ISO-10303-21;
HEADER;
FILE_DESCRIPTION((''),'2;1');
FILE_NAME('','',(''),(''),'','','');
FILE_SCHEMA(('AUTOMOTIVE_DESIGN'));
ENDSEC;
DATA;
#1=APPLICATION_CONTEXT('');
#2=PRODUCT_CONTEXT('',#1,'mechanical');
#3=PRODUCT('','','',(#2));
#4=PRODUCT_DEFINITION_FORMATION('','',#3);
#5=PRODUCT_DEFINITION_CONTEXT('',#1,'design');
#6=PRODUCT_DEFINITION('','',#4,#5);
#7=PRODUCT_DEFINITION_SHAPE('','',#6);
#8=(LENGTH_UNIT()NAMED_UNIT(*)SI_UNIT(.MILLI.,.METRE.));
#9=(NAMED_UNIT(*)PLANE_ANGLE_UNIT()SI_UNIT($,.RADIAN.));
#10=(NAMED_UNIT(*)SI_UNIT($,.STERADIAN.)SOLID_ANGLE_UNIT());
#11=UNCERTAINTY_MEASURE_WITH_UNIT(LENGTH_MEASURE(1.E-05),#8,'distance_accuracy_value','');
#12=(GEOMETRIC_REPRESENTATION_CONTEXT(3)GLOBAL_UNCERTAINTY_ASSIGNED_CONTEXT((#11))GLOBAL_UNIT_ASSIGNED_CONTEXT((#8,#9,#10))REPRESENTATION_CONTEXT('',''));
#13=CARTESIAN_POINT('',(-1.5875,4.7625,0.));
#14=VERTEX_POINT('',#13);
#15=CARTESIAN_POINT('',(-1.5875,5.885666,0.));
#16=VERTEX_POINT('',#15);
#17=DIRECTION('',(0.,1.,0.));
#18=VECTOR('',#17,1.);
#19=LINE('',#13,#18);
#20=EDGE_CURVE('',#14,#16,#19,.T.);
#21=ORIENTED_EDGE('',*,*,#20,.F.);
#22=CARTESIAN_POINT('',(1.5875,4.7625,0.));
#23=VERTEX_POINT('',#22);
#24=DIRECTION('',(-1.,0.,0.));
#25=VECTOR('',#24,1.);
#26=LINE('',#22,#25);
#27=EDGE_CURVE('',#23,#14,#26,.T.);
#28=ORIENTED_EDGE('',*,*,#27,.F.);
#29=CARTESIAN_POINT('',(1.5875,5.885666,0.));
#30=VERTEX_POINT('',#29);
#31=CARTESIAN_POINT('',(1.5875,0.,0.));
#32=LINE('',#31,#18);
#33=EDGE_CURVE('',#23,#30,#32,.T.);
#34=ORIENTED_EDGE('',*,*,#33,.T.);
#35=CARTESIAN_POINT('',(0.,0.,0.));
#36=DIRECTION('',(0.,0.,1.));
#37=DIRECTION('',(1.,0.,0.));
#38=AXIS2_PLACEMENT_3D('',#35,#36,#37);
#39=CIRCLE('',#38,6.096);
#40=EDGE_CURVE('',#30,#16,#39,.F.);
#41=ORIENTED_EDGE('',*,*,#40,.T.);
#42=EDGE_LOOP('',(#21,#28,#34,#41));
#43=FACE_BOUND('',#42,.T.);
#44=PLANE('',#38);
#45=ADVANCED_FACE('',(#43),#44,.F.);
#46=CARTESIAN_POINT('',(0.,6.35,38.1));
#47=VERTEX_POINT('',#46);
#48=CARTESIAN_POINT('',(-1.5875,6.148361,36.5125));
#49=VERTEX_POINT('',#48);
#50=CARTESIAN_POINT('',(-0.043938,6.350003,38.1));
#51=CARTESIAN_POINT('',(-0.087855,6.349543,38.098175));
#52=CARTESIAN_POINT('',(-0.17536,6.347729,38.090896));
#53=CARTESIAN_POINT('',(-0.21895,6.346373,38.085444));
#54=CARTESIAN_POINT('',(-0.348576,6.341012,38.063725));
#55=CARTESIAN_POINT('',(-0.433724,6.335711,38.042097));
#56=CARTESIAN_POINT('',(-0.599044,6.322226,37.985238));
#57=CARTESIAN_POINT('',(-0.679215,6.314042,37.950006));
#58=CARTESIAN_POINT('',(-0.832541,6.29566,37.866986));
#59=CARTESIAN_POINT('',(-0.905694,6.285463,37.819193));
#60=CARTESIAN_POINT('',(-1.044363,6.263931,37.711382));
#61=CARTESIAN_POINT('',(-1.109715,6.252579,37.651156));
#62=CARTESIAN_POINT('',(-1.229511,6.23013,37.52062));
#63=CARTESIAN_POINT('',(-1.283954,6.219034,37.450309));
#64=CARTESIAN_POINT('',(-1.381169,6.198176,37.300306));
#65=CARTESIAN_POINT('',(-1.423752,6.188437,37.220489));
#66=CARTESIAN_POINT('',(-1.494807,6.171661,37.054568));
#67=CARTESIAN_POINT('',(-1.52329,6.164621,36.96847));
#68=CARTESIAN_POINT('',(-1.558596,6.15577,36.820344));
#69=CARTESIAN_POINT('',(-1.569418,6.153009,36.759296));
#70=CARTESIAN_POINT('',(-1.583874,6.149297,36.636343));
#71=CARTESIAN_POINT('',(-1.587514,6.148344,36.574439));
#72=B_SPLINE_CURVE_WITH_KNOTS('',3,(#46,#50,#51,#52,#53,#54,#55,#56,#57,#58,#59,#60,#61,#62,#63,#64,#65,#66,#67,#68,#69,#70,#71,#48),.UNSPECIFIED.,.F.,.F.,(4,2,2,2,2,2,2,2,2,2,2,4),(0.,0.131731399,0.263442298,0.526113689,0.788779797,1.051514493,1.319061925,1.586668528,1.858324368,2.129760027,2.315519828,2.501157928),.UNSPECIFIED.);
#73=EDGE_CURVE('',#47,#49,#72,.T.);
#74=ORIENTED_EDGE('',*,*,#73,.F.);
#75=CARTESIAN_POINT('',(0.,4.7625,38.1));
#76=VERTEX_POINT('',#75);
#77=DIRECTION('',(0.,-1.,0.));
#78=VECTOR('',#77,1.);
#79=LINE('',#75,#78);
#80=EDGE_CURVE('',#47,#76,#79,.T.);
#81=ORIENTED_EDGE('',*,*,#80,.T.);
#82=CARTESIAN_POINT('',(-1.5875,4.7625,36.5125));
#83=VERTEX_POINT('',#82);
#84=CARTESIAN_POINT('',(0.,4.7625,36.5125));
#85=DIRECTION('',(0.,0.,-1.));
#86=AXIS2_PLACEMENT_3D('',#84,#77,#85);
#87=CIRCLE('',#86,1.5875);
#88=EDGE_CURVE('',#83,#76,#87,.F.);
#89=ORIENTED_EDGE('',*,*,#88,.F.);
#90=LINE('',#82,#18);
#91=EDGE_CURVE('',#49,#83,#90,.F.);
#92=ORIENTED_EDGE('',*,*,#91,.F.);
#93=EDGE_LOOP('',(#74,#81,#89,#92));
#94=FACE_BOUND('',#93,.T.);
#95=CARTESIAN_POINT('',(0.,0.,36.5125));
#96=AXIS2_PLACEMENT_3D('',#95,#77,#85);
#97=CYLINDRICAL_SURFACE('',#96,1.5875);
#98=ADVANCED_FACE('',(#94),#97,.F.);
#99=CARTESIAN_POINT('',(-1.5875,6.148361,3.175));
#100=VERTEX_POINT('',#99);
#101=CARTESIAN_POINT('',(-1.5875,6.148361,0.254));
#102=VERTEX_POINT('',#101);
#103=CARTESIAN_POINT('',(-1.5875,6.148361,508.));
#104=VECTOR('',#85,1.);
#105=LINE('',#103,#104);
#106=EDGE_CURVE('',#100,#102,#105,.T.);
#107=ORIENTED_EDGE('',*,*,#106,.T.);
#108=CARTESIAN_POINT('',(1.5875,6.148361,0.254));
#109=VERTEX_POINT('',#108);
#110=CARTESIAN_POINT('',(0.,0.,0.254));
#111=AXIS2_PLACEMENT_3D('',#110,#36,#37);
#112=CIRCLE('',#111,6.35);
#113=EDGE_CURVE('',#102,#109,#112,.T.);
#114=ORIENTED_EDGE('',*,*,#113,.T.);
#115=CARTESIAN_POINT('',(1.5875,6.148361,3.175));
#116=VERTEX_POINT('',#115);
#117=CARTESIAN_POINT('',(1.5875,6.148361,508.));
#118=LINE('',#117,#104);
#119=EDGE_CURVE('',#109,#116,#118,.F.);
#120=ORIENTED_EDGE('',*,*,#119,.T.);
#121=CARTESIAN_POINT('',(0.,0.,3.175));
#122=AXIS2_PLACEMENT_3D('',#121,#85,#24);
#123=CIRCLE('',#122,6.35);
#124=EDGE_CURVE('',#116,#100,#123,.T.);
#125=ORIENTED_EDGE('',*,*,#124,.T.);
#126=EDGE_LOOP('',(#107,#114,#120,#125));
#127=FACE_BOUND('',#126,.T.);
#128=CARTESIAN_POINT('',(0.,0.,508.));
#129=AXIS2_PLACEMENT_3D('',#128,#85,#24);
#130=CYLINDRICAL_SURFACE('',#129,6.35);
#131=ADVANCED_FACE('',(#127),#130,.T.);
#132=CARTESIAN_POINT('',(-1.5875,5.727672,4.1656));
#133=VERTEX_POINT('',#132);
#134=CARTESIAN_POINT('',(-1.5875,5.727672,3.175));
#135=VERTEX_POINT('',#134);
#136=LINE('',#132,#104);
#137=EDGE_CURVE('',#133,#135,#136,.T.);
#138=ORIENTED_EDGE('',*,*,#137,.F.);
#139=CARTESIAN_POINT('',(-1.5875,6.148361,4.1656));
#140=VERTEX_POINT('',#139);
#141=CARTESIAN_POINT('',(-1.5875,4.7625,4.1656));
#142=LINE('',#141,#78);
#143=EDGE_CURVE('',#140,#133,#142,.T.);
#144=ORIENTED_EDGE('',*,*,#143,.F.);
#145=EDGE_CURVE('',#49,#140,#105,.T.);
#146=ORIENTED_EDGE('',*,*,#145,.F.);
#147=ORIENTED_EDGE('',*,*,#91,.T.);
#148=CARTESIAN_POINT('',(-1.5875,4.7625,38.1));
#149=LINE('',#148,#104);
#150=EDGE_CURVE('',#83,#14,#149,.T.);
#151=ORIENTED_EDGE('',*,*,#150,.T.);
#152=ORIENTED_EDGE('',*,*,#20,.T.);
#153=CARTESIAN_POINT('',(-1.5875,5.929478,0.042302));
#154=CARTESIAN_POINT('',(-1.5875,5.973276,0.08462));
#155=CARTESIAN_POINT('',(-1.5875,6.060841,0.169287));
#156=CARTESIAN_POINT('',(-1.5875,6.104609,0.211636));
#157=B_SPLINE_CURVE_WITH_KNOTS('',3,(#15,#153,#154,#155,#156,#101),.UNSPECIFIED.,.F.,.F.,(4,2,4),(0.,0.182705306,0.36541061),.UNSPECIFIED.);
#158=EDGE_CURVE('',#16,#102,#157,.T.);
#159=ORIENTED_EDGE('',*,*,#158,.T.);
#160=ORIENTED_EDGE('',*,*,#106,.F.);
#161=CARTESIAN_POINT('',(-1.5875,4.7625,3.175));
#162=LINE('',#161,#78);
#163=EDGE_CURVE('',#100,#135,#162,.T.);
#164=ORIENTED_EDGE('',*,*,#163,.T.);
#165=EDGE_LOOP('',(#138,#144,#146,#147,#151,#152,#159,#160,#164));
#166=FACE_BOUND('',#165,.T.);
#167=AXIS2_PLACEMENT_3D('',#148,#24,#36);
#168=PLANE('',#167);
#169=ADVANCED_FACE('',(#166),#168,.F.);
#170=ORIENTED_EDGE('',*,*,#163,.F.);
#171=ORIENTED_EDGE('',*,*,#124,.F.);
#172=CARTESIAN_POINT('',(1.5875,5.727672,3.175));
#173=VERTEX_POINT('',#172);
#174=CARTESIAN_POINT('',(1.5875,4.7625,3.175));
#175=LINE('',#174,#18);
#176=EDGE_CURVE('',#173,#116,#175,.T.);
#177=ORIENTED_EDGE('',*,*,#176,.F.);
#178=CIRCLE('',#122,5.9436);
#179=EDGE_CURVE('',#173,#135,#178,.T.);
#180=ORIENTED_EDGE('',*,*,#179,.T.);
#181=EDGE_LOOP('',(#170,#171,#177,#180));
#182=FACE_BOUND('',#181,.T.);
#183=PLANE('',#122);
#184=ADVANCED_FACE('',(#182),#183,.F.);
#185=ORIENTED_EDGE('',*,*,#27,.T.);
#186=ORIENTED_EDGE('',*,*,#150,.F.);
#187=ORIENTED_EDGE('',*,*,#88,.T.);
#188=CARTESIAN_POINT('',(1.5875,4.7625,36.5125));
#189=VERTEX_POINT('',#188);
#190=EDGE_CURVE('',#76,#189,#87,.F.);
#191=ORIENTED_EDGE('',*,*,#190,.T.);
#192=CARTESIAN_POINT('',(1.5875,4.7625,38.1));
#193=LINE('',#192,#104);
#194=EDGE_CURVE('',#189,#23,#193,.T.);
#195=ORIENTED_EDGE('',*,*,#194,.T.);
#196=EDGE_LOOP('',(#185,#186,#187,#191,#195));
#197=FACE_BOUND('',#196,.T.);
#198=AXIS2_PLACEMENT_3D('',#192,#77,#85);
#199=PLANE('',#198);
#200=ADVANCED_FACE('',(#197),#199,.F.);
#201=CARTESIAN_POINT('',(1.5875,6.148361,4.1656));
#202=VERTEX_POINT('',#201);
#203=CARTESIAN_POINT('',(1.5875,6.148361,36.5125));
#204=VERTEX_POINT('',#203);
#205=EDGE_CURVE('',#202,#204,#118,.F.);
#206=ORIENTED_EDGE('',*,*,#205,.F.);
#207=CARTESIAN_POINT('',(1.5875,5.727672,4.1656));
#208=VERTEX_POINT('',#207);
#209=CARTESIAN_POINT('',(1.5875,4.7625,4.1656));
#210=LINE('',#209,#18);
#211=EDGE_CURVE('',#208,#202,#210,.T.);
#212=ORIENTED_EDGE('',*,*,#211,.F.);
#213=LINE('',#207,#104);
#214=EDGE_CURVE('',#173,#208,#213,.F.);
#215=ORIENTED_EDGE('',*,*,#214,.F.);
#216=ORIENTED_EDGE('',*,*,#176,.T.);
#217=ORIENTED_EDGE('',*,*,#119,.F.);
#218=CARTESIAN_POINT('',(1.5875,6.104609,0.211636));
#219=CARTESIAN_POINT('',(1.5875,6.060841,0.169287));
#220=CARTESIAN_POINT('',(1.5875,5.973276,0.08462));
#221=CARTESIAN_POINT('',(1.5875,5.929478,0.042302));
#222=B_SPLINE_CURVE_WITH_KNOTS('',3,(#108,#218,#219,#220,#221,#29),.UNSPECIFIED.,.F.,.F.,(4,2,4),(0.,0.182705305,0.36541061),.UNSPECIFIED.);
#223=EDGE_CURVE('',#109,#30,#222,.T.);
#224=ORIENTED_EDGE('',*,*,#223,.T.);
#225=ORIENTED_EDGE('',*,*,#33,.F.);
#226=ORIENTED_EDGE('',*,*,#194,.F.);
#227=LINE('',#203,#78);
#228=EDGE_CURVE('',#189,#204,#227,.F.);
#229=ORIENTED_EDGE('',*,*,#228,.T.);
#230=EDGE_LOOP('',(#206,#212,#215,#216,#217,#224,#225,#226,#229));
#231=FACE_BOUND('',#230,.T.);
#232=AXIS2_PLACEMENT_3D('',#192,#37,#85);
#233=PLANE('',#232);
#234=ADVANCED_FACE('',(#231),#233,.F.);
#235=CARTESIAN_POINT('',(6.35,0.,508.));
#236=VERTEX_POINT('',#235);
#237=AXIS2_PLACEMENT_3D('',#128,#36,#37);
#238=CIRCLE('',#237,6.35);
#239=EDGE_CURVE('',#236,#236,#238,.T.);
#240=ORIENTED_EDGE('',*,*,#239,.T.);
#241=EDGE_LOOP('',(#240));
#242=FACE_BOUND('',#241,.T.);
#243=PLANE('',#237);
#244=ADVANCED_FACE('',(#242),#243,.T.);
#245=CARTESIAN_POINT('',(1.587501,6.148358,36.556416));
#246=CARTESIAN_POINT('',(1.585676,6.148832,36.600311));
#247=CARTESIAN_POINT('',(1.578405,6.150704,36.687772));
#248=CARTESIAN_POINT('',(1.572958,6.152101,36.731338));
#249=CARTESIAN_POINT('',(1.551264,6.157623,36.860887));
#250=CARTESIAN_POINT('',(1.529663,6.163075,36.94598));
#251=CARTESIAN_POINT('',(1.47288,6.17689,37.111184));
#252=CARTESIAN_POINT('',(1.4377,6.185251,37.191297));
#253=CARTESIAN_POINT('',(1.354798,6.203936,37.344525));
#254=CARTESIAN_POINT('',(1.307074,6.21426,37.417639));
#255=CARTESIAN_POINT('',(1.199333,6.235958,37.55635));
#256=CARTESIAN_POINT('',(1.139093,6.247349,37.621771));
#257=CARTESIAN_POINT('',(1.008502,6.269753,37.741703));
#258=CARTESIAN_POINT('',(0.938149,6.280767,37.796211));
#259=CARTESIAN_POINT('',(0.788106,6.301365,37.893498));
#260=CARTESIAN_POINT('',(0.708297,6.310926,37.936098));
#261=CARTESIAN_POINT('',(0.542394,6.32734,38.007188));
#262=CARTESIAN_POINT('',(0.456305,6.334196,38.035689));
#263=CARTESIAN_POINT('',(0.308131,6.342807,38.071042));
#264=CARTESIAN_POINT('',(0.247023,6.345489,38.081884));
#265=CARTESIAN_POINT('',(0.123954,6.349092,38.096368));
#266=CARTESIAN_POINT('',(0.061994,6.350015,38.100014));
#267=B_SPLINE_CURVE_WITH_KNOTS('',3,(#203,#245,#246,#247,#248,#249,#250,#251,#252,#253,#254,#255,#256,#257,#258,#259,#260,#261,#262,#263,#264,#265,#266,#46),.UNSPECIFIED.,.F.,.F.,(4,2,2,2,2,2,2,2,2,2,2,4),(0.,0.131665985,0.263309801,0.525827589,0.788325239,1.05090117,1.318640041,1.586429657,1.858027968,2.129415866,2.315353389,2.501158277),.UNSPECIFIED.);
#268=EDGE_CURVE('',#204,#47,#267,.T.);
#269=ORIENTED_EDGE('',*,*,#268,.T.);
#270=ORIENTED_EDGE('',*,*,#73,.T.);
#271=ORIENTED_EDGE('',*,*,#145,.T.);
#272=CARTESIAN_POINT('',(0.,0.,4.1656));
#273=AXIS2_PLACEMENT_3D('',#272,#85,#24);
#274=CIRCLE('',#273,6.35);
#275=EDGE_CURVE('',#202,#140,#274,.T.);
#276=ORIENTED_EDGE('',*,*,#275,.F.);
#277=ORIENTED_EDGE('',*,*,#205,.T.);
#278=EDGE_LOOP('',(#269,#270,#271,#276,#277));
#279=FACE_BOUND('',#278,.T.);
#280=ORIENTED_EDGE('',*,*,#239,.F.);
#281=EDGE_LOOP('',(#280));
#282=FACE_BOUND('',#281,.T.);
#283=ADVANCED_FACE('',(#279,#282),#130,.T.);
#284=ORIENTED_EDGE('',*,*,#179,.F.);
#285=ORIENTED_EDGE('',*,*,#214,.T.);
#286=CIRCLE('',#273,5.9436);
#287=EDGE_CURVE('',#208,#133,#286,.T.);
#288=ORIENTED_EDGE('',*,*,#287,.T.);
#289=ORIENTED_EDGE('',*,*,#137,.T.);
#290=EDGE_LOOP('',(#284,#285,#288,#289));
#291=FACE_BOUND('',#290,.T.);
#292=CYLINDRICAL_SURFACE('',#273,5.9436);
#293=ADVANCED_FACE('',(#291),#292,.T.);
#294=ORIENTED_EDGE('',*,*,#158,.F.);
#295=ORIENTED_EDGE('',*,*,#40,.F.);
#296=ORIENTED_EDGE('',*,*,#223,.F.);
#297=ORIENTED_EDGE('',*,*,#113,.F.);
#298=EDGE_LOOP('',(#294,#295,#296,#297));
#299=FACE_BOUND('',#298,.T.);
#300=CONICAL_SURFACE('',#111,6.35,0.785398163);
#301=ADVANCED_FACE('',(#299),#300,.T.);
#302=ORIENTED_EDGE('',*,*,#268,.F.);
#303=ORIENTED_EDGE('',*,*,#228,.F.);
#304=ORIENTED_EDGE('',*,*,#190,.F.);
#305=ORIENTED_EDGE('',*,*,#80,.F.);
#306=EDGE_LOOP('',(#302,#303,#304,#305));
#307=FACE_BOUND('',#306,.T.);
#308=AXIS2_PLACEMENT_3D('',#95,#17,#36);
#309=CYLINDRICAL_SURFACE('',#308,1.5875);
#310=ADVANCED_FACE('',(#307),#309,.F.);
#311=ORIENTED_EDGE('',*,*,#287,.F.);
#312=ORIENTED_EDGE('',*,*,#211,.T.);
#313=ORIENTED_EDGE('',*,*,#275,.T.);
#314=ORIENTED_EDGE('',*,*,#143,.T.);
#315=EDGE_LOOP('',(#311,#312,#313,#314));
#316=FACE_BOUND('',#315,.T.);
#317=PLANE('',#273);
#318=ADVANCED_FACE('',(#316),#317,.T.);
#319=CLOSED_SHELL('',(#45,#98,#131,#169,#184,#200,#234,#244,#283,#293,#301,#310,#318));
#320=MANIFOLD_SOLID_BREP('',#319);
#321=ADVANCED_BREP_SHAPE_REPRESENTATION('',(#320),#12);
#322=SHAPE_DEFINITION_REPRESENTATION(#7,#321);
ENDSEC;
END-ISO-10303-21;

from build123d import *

# Parameters (mm, degrees)
SKETCH1_R           = 6.35
BOSS_EXTRUDE1_DEPTH = 508
SKETCH2_W           = 3.175
SKETCH2_H           = 3.175
CUT_EXTRUDE1_DEPTH  = 38.1
SKETCH3_R           = 9.19467987
SKETCH3_R_2         = 5.9436
CUT_EXTRUDE2_DEPTH  = 0.9906
CHAMFER1_SIZE       = 0.254
FILLET1_R           = 1.5875


with BuildPart() as part:
    # Sketch1 → Boss-Extrude1 (new body)
    with BuildSketch(Plane.XY):
        Circle(SKETCH1_R)
    extrude(amount=BOSS_EXTRUDE1_DEPTH)

    # Sketch2 → Cut-Extrude1 (cut)
    with BuildSketch(Plane(origin=(0, 0, 0), x_dir=(-1, 0, 0), z_dir=(0, 0, -1))):
        with Locations((0, 6.35)):
            Rectangle(SKETCH2_W, SKETCH2_H)
    extrude(amount=-CUT_EXTRUDE1_DEPTH, mode=Mode.SUBTRACT)

    # Sketch3 → Cut-Extrude2 (cut)
    with BuildSketch(Plane(origin=(0, 0, 3.175), x_dir=(-1, 0, 0), z_dir=(0, 0, -1))):
        Circle(SKETCH3_R)
        Circle(SKETCH3_R_2, mode=Mode.SUBTRACT)
    extrude(amount=-CUT_EXTRUDE2_DEPTH, mode=Mode.SUBTRACT)

    # Chamfer1
    chamfer1_edges = [part.edges().sort_by_distance(p)[0] for p in [
        (0, -6.35, 0),
    ]]
    chamfer(chamfer1_edges, length=CHAMFER1_SIZE)

    # Fillet1
    fillet1_edges = [part.edges().sort_by_distance(p)[0] for p in [
        (-1.5875, 5.455430531, 38.1),
        (1.5875, 5.455430531, 38.1),
    ]]
    fillet(fillet1_edges, radius=FILLET1_R - 0.0001)  # a hair under: the kernel refuses the full size


solid = part.part
